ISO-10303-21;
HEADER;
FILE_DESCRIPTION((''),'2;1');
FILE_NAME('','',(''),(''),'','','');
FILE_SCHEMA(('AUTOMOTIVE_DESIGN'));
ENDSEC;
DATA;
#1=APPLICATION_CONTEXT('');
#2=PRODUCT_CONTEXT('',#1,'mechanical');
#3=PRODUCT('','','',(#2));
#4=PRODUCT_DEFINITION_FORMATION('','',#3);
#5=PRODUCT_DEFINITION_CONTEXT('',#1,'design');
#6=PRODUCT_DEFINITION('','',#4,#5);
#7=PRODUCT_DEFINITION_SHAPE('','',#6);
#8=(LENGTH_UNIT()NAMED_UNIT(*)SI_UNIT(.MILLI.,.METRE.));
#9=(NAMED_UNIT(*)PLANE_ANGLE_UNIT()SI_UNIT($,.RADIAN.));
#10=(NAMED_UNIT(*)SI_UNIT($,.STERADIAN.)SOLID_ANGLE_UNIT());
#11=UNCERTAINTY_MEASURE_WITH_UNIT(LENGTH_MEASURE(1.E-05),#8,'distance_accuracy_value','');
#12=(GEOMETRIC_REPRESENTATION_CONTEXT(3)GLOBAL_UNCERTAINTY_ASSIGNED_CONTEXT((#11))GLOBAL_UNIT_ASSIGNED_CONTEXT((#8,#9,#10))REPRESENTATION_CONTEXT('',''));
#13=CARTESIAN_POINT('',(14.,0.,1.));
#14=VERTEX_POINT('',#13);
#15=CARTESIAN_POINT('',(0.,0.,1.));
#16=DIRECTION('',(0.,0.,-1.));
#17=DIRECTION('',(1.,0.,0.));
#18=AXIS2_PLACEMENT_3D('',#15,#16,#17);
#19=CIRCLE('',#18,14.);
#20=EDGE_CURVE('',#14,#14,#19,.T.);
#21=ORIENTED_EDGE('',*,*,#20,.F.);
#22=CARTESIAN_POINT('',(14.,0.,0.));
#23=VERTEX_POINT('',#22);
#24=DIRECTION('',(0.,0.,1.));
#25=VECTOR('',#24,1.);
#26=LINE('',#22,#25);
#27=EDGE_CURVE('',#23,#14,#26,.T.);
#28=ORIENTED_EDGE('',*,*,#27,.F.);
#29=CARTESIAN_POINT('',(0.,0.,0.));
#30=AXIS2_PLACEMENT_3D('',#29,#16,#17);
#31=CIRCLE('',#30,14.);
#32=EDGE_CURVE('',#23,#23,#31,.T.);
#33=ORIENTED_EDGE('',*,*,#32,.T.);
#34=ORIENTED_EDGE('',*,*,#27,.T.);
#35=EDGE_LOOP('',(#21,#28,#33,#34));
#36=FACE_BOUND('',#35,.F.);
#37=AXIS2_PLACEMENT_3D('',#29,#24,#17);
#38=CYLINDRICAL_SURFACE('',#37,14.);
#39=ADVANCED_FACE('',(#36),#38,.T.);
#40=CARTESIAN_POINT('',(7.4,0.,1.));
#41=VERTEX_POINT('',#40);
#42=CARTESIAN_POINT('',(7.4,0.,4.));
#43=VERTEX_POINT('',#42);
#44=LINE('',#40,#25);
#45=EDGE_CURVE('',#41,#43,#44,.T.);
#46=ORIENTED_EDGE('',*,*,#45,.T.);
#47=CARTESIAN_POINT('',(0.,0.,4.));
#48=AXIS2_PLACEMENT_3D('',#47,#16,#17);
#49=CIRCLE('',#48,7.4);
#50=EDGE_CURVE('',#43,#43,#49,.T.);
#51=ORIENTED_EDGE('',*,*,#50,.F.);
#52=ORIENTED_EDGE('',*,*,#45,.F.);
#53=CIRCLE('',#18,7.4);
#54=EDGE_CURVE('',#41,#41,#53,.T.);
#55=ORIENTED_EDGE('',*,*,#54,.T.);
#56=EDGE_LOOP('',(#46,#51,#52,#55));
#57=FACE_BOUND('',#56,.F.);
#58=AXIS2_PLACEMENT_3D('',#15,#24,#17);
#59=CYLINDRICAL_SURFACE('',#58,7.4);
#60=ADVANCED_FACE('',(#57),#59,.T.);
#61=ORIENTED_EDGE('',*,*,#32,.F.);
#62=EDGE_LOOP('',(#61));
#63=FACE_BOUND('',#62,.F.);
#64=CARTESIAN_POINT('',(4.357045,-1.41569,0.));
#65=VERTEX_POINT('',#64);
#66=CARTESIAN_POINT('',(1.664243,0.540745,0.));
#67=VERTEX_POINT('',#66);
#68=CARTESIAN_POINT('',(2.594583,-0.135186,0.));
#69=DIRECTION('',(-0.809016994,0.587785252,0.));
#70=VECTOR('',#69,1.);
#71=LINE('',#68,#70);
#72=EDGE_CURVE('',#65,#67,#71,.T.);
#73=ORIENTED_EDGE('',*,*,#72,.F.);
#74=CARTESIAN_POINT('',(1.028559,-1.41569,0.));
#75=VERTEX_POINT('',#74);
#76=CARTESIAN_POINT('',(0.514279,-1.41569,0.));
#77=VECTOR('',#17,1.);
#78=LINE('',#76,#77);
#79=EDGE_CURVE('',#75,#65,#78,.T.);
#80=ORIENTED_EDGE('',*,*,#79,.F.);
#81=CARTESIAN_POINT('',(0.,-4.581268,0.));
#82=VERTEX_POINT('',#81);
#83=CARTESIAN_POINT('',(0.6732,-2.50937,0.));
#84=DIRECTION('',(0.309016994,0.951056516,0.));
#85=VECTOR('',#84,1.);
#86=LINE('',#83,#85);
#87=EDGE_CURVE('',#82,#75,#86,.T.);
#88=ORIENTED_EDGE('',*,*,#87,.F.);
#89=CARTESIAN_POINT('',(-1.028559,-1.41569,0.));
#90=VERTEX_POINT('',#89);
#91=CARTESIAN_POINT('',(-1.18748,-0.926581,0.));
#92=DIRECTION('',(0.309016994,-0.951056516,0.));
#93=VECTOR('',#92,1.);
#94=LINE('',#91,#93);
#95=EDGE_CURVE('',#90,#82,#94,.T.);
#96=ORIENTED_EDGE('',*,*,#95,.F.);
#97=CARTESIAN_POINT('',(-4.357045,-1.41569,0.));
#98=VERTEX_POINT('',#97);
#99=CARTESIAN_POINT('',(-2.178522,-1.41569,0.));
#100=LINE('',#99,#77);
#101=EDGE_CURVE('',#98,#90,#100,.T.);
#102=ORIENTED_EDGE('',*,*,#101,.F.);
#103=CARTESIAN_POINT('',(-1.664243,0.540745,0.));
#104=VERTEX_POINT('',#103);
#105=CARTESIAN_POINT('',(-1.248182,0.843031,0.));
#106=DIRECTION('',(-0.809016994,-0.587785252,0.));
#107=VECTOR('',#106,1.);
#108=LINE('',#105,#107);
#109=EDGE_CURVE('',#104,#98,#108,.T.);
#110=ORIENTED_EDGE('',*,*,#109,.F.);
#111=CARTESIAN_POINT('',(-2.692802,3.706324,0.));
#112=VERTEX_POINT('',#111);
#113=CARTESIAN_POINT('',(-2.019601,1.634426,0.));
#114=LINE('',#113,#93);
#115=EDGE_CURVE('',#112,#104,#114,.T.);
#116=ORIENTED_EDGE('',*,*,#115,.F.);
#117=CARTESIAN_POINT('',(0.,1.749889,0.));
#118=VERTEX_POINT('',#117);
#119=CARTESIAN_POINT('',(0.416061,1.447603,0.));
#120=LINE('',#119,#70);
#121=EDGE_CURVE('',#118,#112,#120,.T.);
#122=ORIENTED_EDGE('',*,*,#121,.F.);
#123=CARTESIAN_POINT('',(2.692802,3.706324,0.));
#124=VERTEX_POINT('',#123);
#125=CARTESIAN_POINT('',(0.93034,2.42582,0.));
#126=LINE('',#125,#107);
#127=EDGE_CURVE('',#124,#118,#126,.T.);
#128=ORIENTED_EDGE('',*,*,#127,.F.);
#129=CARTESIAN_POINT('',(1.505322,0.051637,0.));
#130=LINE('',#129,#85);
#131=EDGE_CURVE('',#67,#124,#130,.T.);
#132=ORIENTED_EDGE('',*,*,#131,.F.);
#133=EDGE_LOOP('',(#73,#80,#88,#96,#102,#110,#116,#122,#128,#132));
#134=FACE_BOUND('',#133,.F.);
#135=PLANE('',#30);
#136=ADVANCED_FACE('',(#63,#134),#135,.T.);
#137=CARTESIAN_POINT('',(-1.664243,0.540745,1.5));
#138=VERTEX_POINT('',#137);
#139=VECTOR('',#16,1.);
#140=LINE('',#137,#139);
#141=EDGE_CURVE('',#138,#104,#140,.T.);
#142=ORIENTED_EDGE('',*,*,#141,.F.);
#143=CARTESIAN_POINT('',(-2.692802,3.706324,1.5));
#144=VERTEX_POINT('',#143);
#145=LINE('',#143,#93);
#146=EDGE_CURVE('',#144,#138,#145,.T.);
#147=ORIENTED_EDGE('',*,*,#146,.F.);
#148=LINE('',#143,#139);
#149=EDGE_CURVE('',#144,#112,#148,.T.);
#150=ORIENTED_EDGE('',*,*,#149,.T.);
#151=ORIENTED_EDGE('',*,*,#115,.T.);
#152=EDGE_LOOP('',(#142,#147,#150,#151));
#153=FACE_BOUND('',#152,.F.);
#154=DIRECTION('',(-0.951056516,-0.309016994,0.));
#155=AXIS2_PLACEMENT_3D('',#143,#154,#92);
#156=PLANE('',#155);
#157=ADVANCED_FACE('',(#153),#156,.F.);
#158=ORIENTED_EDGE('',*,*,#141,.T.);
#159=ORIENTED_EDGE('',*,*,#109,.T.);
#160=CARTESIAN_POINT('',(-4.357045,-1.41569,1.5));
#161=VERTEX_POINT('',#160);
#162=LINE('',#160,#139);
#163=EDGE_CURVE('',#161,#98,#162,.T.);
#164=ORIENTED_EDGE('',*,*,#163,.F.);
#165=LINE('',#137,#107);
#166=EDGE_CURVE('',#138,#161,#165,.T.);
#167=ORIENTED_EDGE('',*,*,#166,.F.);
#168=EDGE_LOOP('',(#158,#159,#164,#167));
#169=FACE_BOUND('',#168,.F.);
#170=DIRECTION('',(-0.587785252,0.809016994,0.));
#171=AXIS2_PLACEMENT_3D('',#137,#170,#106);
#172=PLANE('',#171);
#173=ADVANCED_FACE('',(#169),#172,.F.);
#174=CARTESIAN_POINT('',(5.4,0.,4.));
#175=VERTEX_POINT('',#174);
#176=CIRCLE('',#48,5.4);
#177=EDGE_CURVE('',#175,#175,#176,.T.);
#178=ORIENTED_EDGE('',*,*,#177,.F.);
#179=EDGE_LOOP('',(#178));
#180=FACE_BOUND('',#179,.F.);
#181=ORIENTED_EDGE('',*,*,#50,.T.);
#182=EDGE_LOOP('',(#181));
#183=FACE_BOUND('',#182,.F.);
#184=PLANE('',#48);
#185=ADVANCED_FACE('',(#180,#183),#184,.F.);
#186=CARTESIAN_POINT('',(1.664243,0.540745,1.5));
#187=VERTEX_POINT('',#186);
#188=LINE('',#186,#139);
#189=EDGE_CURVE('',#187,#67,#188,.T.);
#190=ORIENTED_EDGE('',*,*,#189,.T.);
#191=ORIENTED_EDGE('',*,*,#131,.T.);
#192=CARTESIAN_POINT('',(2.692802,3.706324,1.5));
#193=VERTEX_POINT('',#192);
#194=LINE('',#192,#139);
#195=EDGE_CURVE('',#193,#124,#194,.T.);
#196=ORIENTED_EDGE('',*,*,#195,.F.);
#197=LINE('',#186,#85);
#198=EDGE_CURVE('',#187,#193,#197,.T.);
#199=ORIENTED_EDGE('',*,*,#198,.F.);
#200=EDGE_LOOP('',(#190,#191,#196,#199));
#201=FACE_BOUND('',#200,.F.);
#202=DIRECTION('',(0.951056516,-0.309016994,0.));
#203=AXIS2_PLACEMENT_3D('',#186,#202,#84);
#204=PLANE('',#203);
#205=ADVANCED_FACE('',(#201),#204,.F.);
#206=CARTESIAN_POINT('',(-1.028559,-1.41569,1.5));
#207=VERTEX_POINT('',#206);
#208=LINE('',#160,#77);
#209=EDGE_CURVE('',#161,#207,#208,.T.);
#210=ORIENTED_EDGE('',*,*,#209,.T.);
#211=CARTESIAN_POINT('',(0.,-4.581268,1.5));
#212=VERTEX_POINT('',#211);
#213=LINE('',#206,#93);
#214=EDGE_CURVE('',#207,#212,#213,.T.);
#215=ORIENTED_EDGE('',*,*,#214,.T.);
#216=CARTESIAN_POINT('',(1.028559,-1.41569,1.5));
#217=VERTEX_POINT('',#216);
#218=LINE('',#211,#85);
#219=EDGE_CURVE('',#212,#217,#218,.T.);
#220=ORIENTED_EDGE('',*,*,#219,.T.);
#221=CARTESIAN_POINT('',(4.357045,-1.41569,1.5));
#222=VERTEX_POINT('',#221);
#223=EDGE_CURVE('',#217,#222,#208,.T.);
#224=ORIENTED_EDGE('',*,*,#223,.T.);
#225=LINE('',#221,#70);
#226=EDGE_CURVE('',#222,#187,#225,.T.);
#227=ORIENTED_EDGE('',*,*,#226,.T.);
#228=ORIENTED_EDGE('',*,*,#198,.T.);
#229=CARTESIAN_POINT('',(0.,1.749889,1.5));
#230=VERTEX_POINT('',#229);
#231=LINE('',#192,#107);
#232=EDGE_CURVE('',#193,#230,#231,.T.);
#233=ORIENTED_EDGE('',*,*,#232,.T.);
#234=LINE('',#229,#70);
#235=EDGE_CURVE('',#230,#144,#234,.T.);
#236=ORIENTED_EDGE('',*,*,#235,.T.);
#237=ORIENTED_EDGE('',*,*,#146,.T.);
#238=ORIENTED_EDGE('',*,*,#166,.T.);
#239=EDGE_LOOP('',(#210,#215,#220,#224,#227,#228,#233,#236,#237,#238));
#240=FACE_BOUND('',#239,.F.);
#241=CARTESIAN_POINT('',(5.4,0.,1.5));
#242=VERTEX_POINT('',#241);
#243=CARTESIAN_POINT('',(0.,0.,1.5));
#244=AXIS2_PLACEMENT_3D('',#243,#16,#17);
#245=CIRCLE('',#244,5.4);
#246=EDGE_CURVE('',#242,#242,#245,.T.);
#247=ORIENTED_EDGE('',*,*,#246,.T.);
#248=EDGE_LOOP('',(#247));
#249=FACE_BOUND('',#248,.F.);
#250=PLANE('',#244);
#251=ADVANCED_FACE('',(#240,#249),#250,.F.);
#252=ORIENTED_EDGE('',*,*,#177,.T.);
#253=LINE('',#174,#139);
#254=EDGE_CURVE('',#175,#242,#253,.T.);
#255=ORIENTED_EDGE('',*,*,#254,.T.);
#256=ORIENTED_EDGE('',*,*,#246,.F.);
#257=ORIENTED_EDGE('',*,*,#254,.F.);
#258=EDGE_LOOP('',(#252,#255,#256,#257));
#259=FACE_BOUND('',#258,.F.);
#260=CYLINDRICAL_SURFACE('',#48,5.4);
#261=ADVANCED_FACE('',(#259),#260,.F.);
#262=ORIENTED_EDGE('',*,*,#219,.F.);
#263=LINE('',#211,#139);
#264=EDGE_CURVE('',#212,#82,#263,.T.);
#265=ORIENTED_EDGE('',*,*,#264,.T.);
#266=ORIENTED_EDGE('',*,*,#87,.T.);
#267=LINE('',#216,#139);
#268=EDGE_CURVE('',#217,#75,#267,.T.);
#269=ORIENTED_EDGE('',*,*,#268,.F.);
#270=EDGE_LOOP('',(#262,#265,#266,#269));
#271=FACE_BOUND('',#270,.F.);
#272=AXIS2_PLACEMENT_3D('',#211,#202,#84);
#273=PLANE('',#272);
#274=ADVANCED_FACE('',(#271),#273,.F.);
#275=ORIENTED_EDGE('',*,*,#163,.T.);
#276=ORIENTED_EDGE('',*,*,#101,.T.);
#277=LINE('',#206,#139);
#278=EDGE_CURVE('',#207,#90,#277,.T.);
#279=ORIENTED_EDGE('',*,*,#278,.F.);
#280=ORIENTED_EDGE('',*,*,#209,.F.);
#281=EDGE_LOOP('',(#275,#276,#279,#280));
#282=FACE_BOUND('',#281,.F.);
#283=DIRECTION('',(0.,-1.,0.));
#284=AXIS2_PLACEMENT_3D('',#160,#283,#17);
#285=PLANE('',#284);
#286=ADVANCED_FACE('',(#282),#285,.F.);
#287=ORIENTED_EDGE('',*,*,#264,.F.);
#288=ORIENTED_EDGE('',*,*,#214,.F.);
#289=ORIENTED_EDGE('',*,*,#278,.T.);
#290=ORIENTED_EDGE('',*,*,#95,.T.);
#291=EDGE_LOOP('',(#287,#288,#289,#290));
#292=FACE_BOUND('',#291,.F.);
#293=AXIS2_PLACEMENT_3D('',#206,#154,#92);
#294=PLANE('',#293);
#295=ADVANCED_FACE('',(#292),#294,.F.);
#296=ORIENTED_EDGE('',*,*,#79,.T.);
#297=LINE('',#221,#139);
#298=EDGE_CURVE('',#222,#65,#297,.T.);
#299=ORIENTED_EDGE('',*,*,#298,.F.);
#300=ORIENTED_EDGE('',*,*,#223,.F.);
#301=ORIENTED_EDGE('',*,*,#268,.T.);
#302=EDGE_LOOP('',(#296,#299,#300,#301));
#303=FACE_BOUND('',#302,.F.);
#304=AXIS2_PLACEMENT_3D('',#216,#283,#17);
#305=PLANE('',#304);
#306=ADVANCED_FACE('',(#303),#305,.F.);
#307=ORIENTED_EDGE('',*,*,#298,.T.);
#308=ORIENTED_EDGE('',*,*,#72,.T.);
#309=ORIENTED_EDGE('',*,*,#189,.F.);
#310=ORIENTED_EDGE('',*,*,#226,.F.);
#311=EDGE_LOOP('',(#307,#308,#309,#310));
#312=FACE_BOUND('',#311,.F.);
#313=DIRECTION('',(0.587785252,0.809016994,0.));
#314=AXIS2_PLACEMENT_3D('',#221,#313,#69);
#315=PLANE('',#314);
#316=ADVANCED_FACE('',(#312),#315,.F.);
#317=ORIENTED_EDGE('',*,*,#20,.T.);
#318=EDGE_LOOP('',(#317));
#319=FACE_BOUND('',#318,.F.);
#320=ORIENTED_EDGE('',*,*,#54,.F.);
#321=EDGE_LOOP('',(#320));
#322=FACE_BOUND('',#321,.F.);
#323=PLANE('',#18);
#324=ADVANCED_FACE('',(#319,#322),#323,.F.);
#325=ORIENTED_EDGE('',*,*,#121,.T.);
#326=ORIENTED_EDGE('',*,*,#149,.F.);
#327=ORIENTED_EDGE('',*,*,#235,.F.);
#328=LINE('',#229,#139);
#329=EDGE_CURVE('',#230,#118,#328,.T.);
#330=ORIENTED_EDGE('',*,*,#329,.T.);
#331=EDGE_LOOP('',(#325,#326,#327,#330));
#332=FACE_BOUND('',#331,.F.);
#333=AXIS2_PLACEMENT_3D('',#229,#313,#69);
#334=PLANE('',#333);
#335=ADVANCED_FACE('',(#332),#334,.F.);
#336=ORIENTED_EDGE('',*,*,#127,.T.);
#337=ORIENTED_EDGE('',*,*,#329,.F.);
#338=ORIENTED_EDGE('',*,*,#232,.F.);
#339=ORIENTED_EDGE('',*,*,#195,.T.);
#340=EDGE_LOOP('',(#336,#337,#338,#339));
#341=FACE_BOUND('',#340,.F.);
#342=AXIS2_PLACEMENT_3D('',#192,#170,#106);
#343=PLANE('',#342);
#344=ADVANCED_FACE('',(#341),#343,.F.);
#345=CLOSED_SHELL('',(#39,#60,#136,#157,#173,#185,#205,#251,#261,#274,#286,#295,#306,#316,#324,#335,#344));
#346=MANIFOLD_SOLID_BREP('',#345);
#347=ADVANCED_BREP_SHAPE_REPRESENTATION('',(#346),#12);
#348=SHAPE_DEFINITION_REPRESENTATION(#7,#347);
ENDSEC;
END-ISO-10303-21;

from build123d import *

# Parameters (mm, degrees)
F3_DEPTH = 25


with BuildPart() as f1:
    # F0 (on Front) → F1 (revolve)
    with BuildSketch(Plane.XZ):
        Polygon((0, 1.5), (0, 0), (14, 0), (14, 1), (7.4, 1), (7.4, 4), (5.4, 4), (5.4, 1.5), align=None)
    revolve(axis=Axis((0, 0, 0.75), (0, 0, -1)))

    # F2 (on face) → F3 (cut)
    with BuildSketch(Plane.XY.offset(1.5)):
        Polygon((-1.0285587608, -1.4156896825), (-1.6642430343, 0.5407453412), (-4.3570448294, -1.4156896825), align=None)
        Polygon((0, 1.7498886826), (-2.6928017951, 3.7063237062), (-1.6642430343, 0.5407453412), align=None)
        Polygon((1.6642430343, 0.5407453412), (0, 1.7498886826), (-1.6642430343, 0.5407453412), (-1.0285587608, -1.4156896825), (1.0285587608, -1.4156896825), align=None)
        Polygon((2.6928017951, 3.7063237062), (0, 1.7498886826), (1.6642430343, 0.5407453412), align=None)
        Polygon((4.3570448294, -1.4156896825), (1.6642430343, 0.5407453412), (1.0285587608, -1.4156896825), align=None)
        Polygon((1.0285587608, -1.4156896825), (-1.0285587608, -1.4156896825), (0, -4.5812680475), align=None)
    extrude(amount=-F3_DEPTH, mode=Mode.SUBTRACT)


solid = f1.part
